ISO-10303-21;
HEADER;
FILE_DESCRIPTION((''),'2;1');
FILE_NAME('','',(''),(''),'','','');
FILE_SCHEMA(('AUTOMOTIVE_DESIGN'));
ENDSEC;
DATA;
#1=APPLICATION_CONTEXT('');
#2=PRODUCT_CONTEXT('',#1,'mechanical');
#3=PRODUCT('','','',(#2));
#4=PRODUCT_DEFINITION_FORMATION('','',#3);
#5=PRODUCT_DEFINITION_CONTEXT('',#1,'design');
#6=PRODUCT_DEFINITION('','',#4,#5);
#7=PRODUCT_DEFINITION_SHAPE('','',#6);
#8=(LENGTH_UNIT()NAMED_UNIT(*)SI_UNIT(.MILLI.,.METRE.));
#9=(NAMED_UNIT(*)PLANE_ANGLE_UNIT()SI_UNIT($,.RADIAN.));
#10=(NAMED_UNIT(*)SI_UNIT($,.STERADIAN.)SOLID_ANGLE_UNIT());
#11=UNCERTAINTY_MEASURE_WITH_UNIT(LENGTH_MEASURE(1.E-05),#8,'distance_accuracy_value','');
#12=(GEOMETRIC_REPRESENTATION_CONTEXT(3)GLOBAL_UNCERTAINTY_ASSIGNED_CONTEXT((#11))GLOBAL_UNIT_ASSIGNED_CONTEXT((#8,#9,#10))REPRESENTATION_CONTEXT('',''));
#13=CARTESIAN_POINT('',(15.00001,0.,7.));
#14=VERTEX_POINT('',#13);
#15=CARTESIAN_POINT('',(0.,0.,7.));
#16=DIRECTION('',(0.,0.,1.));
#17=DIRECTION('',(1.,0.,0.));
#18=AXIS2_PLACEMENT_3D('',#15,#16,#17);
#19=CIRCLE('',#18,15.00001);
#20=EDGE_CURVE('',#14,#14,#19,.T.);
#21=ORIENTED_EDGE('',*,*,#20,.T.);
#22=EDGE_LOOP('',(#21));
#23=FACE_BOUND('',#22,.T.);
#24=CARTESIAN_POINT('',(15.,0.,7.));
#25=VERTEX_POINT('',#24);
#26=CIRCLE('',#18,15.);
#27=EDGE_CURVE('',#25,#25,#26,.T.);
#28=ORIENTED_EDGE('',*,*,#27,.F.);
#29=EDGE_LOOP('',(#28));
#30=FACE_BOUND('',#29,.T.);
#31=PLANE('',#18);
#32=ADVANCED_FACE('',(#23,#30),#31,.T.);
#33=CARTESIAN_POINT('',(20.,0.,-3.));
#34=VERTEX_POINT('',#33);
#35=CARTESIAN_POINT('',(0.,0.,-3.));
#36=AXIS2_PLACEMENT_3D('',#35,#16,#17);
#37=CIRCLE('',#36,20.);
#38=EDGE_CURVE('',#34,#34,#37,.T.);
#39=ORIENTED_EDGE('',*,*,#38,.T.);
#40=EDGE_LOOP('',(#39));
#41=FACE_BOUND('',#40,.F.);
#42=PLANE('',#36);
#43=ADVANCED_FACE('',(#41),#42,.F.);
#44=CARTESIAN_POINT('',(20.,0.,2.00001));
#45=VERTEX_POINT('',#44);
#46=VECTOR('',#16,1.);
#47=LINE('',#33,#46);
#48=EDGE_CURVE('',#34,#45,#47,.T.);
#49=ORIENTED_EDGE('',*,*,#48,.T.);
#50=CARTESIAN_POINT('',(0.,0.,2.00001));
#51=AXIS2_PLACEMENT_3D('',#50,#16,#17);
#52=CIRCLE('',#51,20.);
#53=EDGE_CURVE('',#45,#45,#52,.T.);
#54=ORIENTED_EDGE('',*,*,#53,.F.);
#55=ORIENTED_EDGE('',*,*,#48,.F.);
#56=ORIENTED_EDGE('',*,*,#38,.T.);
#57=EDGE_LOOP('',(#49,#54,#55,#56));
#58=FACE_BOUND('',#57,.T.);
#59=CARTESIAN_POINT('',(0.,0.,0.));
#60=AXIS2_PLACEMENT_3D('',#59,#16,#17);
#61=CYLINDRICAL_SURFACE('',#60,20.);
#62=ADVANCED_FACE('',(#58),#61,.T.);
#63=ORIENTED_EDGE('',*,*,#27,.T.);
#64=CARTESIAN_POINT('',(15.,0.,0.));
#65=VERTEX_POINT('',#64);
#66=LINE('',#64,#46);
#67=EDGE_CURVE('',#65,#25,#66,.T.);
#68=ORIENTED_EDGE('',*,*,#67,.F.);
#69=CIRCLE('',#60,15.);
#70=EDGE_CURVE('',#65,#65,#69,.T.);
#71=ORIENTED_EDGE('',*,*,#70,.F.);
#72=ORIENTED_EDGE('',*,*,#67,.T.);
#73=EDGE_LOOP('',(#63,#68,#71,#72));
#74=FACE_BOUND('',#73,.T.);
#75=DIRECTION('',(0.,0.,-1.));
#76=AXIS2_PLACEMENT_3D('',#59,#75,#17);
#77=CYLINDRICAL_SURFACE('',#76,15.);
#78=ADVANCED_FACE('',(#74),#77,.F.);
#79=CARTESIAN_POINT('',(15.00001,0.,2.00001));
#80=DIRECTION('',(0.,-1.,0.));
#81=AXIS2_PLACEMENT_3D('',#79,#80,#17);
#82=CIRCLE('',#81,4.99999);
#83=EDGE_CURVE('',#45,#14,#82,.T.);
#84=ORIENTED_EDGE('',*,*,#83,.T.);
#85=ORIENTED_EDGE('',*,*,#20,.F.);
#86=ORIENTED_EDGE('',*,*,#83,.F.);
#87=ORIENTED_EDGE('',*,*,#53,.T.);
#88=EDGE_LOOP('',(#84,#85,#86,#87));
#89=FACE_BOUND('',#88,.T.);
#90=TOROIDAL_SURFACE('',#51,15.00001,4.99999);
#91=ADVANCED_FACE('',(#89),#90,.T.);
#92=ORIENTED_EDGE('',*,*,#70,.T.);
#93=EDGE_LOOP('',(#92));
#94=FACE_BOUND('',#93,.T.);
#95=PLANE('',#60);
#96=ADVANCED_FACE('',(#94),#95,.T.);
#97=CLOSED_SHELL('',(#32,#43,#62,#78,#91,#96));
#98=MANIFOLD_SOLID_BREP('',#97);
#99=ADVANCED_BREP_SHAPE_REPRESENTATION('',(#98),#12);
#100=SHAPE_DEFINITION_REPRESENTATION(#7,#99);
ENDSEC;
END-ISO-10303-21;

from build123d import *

# Parameters (mm, degrees)
F0_R     = 20
F0_R_2   = 15
F1_DEPTH = 7
F2_R     = 20
F3_DEPTH = 3
F4_R     = 4.99999


# Not quite as in the source:
# - a fillet or chamfer is up to 0.001 mm smaller than in the source, because OpenCascade refuses the exact size


with BuildPart() as f1:
    # F0 (on Top) → F1 (new body)
    with BuildSketch(Plane.XY):
        Circle(F0_R)
        Circle(F0_R_2, mode=Mode.SUBTRACT)
    extrude(amount=F1_DEPTH)

    # F2 (on Top) → F3 (join)
    with BuildSketch(Plane.XY):
        Circle(F2_R)
    extrude(amount=-F3_DEPTH)

    # F4 (radius 5 in the source; OpenCascade refuses exactly that, so slightly less here)
    f4_edges = [f1.edges().sort_by_distance(p)[0] for p in [
        (-20, 0, 7),
    ]]
    fillet(f4_edges, radius=F4_R)


solid = f1.part
